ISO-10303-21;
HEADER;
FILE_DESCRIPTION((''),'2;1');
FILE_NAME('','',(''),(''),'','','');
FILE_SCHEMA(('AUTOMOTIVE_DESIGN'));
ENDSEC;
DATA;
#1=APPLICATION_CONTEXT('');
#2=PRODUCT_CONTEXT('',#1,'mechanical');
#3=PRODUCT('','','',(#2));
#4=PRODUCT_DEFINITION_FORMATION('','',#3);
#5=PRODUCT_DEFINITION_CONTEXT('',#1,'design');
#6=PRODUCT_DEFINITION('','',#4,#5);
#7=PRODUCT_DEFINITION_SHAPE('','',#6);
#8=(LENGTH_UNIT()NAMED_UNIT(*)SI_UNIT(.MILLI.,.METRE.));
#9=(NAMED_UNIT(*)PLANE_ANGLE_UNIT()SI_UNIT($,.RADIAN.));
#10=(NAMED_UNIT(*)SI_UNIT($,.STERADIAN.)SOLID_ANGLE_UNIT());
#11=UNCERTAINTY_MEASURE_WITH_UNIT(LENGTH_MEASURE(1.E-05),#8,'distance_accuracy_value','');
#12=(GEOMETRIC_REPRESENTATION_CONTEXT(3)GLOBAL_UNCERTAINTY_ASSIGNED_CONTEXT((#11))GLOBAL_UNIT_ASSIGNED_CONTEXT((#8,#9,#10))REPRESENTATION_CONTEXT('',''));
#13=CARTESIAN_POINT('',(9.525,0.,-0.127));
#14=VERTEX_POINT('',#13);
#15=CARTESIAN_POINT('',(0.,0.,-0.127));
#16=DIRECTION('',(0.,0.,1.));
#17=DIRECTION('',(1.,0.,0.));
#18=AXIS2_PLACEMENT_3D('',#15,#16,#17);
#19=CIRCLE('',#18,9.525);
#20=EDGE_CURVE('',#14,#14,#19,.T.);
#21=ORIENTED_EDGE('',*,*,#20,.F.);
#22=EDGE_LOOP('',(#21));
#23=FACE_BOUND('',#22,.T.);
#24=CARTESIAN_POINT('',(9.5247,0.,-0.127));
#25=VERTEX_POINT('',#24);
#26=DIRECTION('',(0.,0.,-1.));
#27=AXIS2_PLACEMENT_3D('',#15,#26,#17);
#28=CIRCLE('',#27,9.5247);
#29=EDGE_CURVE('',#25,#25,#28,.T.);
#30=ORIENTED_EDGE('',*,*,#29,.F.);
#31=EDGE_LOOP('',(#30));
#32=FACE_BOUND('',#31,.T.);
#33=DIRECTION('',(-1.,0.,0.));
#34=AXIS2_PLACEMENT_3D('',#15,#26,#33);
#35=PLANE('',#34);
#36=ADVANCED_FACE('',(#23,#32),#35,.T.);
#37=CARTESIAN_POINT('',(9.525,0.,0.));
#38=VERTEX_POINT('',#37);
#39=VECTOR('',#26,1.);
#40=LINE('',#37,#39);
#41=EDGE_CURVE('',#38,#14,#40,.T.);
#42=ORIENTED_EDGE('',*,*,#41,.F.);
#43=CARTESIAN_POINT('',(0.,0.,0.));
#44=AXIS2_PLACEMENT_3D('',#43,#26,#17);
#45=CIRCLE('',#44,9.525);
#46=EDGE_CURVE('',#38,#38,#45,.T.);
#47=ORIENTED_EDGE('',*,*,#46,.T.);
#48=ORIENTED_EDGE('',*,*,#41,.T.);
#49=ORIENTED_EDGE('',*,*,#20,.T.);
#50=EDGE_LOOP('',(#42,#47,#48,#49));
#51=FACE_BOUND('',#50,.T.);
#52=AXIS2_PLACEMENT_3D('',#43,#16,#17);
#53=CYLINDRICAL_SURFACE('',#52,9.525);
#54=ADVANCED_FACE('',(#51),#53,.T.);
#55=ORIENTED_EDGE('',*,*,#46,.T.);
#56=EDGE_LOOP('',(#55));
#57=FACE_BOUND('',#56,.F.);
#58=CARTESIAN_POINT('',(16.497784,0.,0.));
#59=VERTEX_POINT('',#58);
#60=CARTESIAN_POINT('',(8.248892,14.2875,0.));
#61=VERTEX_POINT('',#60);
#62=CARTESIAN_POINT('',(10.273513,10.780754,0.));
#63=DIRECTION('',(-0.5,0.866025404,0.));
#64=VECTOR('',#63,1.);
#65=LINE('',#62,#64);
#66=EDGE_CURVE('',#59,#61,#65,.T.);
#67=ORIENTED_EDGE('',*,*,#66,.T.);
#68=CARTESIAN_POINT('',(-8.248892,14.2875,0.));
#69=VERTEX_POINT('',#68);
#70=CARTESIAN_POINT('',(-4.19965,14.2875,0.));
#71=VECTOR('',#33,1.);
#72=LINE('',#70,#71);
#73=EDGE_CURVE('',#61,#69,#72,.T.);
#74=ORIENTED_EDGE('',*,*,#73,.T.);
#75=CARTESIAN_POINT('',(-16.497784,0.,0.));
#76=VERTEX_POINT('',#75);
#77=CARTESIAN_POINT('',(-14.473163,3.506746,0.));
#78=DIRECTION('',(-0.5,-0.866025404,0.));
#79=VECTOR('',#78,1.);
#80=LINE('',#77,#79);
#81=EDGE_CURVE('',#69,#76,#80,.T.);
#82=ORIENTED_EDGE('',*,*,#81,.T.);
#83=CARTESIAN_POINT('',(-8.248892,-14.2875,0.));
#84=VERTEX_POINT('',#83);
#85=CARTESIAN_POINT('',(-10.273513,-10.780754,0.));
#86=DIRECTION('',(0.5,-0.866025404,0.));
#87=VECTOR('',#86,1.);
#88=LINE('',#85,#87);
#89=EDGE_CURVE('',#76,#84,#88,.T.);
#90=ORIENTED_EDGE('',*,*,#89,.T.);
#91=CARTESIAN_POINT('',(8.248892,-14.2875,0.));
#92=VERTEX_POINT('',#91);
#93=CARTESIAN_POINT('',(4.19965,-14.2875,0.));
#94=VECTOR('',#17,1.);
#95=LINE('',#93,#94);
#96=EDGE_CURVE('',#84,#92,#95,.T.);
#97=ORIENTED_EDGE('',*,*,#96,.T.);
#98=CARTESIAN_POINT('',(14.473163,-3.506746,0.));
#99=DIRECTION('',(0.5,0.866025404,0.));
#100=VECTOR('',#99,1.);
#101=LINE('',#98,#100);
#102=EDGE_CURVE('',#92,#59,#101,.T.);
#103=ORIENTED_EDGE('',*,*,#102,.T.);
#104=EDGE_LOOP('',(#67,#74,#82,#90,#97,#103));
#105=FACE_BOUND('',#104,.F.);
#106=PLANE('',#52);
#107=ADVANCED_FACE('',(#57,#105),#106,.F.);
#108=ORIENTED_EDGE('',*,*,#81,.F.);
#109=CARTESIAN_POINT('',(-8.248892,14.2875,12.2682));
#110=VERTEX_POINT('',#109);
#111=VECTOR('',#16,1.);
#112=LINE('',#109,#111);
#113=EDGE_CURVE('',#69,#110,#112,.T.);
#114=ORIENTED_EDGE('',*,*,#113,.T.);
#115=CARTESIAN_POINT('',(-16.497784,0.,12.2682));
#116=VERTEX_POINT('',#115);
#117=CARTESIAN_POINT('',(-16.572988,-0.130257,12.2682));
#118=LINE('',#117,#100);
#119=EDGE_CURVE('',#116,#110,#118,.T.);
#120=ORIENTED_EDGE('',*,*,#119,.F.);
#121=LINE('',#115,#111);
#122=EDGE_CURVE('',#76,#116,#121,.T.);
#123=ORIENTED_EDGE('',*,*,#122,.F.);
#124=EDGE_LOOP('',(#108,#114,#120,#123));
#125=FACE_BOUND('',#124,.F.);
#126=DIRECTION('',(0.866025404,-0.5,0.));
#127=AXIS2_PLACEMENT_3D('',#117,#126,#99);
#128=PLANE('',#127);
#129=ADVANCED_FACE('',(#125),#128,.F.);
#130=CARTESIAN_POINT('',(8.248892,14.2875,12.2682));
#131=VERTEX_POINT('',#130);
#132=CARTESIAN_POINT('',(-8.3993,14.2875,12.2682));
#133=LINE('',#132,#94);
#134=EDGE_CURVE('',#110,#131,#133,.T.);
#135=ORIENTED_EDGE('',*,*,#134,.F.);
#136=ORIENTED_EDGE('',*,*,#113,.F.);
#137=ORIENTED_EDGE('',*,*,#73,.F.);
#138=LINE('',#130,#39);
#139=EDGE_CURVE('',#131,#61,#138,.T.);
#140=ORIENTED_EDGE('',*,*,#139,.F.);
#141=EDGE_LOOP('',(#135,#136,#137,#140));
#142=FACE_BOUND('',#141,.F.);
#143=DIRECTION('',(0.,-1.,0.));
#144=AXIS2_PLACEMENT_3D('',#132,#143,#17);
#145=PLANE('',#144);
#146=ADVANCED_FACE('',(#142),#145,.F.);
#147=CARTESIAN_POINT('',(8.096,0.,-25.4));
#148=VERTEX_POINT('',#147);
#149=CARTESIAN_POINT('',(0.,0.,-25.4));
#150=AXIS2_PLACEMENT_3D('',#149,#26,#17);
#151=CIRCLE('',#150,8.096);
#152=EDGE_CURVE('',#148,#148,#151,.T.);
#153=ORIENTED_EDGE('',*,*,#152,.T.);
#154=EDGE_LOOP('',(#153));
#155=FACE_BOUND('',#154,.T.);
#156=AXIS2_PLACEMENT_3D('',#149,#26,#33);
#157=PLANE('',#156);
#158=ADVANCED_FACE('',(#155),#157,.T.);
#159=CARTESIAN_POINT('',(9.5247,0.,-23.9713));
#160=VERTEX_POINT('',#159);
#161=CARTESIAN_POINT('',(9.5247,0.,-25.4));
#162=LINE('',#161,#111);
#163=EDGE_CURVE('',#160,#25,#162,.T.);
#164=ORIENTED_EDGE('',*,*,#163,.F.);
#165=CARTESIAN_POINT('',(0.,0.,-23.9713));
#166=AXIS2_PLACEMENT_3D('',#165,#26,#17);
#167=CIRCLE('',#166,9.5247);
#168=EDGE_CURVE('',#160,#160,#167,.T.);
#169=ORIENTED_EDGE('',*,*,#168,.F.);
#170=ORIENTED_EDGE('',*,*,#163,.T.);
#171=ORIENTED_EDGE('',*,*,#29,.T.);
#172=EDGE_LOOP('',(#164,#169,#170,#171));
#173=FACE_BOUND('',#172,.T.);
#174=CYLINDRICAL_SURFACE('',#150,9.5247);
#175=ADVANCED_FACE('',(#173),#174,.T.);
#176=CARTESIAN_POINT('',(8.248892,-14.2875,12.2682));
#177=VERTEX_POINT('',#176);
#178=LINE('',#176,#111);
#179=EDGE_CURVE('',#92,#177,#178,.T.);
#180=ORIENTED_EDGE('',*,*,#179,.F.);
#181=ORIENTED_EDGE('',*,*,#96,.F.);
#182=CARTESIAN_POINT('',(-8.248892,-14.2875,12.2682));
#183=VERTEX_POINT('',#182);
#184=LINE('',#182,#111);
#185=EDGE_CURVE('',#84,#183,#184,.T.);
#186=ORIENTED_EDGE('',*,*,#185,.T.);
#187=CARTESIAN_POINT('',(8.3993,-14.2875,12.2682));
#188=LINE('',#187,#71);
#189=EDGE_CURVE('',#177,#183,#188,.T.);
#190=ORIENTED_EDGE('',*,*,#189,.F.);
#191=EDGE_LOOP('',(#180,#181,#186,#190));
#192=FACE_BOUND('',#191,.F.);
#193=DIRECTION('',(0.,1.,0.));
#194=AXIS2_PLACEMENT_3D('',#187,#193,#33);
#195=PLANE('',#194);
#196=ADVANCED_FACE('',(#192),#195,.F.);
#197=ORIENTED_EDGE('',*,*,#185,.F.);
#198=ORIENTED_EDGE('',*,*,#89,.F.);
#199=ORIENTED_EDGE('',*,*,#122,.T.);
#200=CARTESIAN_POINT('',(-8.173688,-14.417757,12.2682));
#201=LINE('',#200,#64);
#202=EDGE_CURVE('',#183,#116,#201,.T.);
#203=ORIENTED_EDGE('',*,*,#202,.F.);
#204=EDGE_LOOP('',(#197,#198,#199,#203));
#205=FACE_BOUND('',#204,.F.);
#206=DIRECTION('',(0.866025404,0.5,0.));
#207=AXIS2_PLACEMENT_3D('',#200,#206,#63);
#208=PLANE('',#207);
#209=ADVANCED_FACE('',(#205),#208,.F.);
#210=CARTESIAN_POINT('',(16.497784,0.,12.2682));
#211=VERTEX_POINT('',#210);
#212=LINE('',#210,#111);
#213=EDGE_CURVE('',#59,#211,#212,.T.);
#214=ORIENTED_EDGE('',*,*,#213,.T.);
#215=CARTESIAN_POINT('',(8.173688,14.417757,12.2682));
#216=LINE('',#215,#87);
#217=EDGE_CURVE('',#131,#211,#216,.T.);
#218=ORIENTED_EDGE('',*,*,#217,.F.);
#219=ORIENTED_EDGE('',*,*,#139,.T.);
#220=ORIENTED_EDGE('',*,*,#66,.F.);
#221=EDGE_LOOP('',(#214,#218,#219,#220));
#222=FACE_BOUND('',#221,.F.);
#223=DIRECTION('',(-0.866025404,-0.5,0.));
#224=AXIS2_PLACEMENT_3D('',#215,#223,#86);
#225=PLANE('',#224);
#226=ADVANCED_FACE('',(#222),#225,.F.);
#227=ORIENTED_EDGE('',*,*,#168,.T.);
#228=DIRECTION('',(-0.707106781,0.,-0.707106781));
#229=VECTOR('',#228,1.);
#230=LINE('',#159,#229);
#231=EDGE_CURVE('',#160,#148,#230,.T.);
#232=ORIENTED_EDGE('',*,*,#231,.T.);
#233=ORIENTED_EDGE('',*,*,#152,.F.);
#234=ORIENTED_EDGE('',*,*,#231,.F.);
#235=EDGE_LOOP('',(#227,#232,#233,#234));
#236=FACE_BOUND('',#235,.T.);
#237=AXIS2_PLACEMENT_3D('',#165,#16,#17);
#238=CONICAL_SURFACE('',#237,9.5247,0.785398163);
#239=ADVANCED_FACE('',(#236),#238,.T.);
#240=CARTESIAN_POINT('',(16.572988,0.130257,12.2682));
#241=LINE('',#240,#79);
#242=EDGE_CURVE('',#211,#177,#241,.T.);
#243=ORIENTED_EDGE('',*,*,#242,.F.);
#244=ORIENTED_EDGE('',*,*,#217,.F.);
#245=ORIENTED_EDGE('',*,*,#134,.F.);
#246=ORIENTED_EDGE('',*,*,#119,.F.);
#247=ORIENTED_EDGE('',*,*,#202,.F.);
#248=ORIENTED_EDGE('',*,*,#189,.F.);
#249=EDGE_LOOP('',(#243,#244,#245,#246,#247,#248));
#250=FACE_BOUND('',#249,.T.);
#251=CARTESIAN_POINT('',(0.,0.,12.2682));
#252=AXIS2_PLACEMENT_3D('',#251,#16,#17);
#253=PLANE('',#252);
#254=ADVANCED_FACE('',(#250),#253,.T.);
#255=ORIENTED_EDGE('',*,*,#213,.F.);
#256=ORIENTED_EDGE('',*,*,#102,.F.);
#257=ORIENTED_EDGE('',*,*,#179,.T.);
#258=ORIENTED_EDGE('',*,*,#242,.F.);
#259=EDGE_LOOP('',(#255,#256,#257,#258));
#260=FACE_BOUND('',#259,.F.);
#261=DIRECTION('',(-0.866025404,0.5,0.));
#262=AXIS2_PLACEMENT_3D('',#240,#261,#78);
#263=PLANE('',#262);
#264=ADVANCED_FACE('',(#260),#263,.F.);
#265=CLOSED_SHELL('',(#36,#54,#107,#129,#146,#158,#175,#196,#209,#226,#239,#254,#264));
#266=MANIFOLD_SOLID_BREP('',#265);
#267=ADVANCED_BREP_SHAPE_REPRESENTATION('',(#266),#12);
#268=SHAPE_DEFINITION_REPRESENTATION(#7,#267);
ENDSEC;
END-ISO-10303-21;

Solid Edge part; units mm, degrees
sketch "Sketch1" plane through (0, 0, 0) normal (0, 0, 1) x (1, 0, 0)
  circle A0 centre (0, 0) radius 16.5735
  dimension "D1" = 33.147
extrude "Protrusion1" add sketch "Sketch1" along normal blind 12.2682
sketch "Sketch2" plane through (0, 0, 0) normal (0, 0, -1) x (1, 0, 0)
  circle A0 centre (0, 0) radius 9.525
extrude "Protrusion2" add sketch "Sketch2" along normal blind 25.4
sketch "Sketch3" plane through (0, 0, -25.4) normal (0, 0, -1) x (1, 0, 0)
  circle A0 centre (0, 0) radius 9.5247
extrude "Cutout1" cut sketch "Sketch3" against normal blind 25.273 flip side to cut
chamfer "Chamfer_1" distance 1.4287 angle 45 1 edges at (-9.5247, 0, -25.4)
sketch "Sketch4" plane through (0, 0, 12.2682) normal (0, 0, 1) x (1, 0, 0)
  line L0 (-8.3993, 14.2875) -> (8.3993, 14.2875)
  dimension "D1" = 28.575
extrude "Cutout2" cut sketch "Sketch4" against normal up to next material side at (0, 14.3375, 12.2682)
pattern_circular "Pattern1" count 6 over 360 about axis through (0, 0, 12.2682) along (0, 0, 1) of "Cutout2"
properties part number "24102768"
